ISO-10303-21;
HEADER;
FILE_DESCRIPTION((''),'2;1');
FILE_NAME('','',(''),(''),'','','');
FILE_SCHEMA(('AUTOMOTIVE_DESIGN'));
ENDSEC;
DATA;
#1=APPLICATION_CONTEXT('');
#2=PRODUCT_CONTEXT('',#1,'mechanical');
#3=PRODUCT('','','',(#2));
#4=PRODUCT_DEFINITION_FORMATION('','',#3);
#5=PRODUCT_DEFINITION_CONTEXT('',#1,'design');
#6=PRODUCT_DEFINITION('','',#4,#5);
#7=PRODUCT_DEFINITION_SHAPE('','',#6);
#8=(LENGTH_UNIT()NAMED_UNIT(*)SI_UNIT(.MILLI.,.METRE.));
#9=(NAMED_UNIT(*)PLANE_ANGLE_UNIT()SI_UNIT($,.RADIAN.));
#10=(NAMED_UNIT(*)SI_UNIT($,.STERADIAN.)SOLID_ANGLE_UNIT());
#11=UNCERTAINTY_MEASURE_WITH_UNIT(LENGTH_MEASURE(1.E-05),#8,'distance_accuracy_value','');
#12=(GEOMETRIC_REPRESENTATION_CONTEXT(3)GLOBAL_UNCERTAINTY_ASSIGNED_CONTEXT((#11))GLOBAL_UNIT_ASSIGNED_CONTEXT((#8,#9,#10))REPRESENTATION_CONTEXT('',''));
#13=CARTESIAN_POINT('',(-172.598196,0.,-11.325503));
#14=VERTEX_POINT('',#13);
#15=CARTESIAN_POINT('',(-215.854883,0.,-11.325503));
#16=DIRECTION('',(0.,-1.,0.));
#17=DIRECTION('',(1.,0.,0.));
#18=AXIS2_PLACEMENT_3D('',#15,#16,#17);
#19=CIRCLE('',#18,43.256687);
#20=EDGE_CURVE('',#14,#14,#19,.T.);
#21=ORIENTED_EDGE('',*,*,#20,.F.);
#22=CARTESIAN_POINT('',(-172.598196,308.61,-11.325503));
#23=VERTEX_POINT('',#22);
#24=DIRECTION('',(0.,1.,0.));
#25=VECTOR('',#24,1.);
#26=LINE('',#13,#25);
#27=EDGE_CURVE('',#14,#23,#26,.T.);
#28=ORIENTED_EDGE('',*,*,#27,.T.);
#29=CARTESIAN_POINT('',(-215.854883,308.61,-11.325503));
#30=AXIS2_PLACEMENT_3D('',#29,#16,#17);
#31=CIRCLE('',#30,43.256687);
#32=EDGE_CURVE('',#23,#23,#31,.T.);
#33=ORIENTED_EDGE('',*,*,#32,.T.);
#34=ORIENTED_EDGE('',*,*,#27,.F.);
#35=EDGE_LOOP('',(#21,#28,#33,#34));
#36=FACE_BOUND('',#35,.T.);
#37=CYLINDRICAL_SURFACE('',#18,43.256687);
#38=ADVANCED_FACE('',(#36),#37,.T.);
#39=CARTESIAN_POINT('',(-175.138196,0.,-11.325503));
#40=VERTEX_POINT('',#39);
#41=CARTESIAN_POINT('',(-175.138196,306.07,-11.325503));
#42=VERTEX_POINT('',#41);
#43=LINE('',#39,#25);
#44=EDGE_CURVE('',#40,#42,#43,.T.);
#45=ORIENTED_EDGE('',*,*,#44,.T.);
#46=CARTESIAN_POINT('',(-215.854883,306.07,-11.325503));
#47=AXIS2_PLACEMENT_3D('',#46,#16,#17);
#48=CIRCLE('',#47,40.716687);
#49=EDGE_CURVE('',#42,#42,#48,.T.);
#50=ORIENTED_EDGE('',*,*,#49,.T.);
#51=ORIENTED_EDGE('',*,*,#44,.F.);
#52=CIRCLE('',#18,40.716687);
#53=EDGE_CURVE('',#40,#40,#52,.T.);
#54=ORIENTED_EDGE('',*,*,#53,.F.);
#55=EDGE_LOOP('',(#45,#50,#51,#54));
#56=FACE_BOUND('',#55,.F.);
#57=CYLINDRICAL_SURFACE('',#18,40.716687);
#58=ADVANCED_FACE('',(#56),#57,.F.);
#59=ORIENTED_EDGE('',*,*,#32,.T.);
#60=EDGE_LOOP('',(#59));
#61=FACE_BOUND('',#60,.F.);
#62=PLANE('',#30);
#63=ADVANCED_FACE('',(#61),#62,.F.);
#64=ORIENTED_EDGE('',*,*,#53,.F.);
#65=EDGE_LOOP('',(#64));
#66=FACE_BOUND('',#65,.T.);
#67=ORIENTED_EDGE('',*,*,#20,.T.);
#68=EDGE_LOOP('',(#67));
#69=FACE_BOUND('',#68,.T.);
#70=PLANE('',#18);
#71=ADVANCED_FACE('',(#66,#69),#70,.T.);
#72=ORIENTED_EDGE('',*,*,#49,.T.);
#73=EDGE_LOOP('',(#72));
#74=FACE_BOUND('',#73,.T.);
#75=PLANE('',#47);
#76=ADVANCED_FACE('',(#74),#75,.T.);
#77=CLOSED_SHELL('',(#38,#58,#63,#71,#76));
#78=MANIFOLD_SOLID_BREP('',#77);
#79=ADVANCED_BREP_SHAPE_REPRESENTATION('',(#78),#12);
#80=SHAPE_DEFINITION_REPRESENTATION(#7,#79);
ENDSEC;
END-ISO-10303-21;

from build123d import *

# Parameters (mm, degrees)
F0_R     = 43.2566873222
F1_DEPTH = 308.61
F3_T     = -2.54


# Not quite as in the source:
# - the program builds the solid bodies; features that only make, move or delete a surface that nothing else refers to are left out


with BuildPart() as f1:
    # F0 (on Front) → F1 (new body)
    with BuildSketch(Plane.XZ):
        with Locations((-215.854883194, -11.3255027682)):
            Circle(F0_R)
    extrude(amount=-F1_DEPTH)

    # F3
    f3_openings = [f1.faces().sort_by_distance(p)[0] for p in [
        (-215.854883, 0, -11.325503),
    ]]
    offset(amount=F3_T, openings=f3_openings)


solid = f1.part
